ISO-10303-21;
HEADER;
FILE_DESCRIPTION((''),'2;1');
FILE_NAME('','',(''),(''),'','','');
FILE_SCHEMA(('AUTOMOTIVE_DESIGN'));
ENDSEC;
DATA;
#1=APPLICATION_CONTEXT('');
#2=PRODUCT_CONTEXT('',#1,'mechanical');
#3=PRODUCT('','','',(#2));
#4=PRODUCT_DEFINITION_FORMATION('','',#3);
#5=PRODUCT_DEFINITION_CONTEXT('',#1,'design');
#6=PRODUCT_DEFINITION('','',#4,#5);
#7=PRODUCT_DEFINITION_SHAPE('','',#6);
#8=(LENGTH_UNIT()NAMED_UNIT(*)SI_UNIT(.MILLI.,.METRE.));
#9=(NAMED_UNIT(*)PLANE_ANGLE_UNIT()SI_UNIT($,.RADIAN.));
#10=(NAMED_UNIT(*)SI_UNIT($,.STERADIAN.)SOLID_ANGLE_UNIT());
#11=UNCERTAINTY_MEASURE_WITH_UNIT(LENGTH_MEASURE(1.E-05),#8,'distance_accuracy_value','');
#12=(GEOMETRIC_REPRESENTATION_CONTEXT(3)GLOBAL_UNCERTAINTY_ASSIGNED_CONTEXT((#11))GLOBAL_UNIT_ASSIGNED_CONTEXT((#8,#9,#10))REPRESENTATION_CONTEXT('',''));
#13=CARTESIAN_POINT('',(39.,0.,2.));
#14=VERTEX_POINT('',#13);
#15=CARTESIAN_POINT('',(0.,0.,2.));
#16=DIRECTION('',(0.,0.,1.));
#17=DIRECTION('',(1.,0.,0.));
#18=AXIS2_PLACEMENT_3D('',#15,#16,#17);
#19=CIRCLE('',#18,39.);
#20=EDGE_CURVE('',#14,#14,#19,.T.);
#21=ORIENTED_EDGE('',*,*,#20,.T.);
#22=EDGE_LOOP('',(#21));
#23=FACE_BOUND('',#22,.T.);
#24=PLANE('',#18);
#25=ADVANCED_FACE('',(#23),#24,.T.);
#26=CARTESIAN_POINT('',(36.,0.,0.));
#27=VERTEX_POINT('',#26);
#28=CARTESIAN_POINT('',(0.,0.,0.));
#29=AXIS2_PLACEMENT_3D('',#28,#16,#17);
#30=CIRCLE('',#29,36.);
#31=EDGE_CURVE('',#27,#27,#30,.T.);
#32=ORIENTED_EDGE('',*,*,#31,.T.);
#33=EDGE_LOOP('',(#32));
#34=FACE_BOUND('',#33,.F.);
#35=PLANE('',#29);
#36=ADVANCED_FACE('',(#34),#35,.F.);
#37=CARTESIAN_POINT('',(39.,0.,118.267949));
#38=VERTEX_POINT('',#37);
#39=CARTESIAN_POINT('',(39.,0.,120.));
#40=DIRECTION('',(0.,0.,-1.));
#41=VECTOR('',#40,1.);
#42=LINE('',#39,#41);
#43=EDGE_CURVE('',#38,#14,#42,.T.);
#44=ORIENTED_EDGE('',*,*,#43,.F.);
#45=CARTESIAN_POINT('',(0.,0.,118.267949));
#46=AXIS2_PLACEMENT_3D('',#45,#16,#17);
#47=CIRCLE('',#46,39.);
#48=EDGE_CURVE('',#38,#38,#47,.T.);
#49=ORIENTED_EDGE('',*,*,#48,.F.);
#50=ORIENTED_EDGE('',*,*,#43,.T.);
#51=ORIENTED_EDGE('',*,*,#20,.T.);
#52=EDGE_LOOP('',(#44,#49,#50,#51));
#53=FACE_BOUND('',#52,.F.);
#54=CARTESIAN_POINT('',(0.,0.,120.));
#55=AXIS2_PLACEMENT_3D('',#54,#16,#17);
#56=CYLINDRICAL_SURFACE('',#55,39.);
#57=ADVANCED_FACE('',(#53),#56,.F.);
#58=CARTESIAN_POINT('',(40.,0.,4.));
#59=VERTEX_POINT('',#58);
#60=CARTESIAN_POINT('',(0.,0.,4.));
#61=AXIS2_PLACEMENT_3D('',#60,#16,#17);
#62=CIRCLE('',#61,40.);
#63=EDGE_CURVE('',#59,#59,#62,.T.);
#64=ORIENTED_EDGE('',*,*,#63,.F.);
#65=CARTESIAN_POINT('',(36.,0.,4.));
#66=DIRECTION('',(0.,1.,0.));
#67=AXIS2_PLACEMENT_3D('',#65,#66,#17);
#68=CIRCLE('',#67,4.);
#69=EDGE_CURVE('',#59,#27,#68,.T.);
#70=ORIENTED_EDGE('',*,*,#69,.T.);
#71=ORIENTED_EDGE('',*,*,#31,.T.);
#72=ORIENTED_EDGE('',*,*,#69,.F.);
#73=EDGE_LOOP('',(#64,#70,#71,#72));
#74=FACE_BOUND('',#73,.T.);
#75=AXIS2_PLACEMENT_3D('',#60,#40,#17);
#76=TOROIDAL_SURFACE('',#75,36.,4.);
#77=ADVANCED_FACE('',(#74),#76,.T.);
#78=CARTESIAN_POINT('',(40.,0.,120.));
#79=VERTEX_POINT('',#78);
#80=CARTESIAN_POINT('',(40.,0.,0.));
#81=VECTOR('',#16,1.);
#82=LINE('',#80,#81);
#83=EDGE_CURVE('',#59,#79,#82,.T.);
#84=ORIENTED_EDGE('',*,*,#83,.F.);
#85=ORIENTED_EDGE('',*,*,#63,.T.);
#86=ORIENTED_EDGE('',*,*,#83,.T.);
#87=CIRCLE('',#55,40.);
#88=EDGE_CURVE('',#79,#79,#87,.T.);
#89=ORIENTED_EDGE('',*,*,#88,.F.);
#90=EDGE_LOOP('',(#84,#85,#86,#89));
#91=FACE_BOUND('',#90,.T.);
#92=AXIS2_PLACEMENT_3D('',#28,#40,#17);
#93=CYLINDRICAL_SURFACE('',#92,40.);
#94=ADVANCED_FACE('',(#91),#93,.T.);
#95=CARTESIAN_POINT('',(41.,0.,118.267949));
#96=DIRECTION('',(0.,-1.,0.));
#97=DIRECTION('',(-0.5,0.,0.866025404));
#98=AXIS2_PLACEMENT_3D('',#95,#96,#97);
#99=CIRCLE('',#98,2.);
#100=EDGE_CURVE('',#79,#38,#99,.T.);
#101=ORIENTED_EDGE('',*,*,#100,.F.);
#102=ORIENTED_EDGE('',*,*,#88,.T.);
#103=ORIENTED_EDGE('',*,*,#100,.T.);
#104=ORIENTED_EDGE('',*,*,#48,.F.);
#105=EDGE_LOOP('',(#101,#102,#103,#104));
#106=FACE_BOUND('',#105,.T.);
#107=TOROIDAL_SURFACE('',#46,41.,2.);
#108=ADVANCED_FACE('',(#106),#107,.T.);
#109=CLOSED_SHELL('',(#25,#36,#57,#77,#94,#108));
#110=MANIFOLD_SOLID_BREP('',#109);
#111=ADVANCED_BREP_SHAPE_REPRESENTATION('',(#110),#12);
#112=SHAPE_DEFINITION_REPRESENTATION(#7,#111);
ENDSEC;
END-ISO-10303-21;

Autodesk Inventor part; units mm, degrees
ref_plane "YZ Plane" through (0, 0, 0) normal (1, 0, 0) x (0, 1, 0)
ref_plane "XZ Plane" through (0, 0, 0) normal (0, 1, 0) x (-1, 0, 0)
ref_plane "XY Plane" through (0, 0, 0) normal (0, 0, 1) x (1, 0, 0)
sketch "Sketch1" plane through (0, 0, 0) normal (0, 0, 1) x (1, 0, 0)
  circle A0 centre (0, 0) radius 40
  dimension "d0" = 80
extrude "Extrusion1" add sketch "Sketch1" along normal blind 120
sketch "Sketch2" plane through (0, 0, 120) normal (0, 0, 1) x (1, 0, 0)
  circle A0 centre (0, 0) radius 39
  dimension "d3" = 78
extrude "Extrusion2" cut sketch "Sketch2" against normal blind 118
fillet "Fillet1" radius 4 1 edges at (-40, 0, 0)
fillet "Fillet2" radius 2 1 edges at (-39, 0, 120)
properties part number "beaker1"
